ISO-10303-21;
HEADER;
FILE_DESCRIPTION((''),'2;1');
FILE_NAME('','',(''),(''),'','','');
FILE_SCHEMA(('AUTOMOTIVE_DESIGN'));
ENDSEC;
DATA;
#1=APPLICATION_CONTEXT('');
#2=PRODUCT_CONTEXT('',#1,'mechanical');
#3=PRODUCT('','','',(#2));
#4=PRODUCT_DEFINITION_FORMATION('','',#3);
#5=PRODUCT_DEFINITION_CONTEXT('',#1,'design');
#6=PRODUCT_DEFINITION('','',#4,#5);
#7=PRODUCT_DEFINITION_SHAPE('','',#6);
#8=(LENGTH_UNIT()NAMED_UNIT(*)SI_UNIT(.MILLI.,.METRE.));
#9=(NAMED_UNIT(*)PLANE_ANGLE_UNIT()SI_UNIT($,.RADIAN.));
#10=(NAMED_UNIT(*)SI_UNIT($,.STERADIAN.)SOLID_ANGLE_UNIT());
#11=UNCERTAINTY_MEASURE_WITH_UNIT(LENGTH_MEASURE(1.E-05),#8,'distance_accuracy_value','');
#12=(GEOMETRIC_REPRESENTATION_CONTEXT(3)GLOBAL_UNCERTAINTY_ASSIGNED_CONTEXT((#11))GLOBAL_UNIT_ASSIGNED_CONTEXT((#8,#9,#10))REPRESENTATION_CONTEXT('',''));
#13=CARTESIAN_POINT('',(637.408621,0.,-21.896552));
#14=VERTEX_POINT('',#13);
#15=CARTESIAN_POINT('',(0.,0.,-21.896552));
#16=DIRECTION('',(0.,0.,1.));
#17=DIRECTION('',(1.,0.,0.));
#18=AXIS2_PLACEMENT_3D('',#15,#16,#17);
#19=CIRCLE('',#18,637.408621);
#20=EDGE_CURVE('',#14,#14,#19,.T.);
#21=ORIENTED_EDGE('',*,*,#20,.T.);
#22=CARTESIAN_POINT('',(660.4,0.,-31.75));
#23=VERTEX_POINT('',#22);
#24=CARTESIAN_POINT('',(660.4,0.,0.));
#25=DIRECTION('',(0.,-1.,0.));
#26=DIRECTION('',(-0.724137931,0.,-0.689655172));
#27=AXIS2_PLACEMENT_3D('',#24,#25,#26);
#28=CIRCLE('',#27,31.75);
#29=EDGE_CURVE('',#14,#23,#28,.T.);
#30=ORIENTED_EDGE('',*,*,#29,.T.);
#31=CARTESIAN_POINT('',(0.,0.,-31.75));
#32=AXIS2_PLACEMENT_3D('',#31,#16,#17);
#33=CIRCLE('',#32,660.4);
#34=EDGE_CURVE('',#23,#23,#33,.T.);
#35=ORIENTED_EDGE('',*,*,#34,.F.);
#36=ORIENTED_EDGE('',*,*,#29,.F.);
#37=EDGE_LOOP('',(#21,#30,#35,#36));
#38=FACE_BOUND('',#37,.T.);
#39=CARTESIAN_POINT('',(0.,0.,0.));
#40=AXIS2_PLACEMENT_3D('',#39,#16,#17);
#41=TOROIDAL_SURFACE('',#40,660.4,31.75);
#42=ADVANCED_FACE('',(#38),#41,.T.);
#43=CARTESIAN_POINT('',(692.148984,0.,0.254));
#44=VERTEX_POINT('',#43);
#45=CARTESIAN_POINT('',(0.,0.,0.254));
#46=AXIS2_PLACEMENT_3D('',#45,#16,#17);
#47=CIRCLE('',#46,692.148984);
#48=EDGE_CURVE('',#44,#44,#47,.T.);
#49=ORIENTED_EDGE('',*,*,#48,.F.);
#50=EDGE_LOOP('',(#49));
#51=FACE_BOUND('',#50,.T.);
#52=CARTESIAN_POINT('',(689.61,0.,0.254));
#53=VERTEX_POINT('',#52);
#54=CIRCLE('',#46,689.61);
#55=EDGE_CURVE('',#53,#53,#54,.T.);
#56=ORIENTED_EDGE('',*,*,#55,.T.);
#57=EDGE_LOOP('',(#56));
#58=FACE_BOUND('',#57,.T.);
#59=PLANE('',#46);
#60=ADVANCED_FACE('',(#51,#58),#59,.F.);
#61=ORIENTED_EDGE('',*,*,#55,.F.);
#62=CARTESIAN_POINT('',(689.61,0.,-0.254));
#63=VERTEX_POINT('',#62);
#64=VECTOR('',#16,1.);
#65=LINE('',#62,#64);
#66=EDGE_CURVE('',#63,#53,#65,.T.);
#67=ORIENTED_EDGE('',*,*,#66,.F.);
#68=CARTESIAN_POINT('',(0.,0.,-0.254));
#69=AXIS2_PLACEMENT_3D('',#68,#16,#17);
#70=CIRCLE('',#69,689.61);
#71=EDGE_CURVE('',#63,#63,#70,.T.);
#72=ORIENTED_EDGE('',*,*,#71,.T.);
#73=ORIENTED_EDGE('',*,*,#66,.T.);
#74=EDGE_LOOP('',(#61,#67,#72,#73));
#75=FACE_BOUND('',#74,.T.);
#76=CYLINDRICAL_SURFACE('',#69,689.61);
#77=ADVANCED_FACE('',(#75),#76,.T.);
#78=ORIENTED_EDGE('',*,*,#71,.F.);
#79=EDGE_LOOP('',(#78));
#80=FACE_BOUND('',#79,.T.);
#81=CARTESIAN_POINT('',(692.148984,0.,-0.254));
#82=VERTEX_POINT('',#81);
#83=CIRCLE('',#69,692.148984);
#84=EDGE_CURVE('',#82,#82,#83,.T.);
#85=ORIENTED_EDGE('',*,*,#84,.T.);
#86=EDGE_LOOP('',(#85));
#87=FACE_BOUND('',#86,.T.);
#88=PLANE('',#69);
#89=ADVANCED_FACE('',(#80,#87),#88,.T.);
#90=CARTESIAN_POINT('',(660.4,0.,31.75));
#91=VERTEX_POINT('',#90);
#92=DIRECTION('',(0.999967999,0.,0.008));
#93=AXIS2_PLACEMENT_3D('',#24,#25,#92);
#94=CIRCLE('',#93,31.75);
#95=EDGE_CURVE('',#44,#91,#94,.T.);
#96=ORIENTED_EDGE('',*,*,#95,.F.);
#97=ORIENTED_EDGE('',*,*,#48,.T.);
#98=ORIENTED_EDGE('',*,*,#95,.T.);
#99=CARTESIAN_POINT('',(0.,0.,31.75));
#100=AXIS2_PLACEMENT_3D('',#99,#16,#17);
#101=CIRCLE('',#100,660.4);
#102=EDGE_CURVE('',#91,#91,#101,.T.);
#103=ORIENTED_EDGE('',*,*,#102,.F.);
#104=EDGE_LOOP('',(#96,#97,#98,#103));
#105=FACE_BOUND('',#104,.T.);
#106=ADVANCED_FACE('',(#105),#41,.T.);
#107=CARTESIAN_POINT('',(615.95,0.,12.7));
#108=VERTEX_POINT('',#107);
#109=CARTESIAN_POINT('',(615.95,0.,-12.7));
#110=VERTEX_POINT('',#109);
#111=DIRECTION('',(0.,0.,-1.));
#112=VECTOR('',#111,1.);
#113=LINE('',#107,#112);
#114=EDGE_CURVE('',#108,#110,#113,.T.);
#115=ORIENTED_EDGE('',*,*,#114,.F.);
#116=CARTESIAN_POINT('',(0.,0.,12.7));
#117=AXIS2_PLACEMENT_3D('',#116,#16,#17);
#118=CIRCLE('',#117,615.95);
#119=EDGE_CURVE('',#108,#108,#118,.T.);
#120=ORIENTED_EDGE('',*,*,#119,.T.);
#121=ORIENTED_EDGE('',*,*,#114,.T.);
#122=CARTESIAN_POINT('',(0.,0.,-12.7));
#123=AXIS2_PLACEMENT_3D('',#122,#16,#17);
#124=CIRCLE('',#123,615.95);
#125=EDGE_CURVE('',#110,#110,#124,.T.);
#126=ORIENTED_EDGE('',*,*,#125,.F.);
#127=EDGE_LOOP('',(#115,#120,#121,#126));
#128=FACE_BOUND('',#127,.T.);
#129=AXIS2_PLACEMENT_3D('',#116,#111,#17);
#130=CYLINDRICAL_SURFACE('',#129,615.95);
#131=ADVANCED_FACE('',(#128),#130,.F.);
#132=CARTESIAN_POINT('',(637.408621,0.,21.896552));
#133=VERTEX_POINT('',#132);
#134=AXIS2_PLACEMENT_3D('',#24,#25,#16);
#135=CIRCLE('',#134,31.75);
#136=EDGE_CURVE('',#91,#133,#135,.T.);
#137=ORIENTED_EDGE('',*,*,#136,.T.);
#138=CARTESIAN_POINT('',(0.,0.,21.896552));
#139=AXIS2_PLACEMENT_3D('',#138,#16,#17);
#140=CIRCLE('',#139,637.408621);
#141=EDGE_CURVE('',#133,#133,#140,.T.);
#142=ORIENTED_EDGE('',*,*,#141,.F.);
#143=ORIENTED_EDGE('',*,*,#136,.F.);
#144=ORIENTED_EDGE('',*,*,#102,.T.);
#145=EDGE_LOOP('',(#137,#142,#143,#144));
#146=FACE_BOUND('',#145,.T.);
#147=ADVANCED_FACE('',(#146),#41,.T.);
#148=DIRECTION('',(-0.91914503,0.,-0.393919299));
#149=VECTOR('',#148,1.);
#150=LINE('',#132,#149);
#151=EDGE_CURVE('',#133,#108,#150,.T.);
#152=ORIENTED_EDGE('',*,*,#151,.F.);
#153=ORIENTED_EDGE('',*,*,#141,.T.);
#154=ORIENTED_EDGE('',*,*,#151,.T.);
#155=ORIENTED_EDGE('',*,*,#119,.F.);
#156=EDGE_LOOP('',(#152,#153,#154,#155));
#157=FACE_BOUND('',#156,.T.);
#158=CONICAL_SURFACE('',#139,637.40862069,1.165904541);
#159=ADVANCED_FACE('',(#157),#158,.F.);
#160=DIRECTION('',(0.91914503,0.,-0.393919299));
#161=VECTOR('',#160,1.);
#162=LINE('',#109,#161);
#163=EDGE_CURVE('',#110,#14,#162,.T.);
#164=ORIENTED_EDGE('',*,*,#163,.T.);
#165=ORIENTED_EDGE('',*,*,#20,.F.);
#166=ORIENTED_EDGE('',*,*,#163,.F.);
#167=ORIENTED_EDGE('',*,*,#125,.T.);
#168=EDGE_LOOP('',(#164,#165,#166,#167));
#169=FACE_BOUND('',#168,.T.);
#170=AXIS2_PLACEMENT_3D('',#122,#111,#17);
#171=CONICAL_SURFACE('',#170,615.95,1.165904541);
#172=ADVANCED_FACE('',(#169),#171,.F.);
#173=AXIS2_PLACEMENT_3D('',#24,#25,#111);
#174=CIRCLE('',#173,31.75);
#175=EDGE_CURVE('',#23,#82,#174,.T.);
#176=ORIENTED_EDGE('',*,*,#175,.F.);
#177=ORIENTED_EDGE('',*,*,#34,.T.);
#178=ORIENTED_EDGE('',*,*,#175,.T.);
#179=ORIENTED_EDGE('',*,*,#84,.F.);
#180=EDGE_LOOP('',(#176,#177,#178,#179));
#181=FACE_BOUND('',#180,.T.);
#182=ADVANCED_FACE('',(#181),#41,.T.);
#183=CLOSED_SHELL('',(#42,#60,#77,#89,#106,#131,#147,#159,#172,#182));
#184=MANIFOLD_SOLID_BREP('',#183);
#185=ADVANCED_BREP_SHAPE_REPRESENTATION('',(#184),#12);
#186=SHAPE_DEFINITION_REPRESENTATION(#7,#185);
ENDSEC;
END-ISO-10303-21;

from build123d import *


# Not quite as in the source:
# - a feature names something its author has since deleted; it is built from what else it names


with BuildPart() as f1:
    # F0 (on Front) → F1 (revolve)
    with BuildSketch(Plane.XZ):
        with BuildLine():
            Line((628.65, 0), (615.95, 0))
            Line((615.95, 0), (615.95, -12.7))
            Line((615.95, -12.7), (637.4086206897, -21.8965517241))
            ThreePointArc((637.4086206897, -21.8965517241), (630.9208650644, -11.7916539742), (628.65, 0))
        make_face()
        with BuildLine():
            Line((615.95, 12.7), (615.95, 0))
            Line((615.95, 0), (628.65, 0))
            ThreePointArc((628.65, 0), (630.9208650644, 11.7916539742), (637.4086206897, 21.8965517241))
            Line((637.4086206897, 21.8965517241), (615.95, 12.7))
        make_face()
        with BuildLine():
            ThreePointArc((637.4086206897, 21.8965517241), (630.9208650644, 11.7916539742), (628.65, 0))
            ThreePointArc((628.65, 0), (630.9208650644, -11.7916539742), (637.4086206897, -21.8965517241))
            Line((637.4086206897, -21.8965517241), (660.4, -31.75))
            ThreePointArc((660.4, -31.75), (682.7606574143, -22.5402639736), (692.1489839837, -0.254))
            Line((692.1489839837, -0.254), (689.61, -0.254))
            Line((689.61, -0.254), (689.61, 0))
            Line((689.61, 0), (689.61, 0.254))
            Line((689.61, 0.254), (692.1489839837, 0.254))
            ThreePointArc((692.1489839837, 0.254), (682.7606574143, 22.5402639736), (660.4, 31.75))
            Line((660.4, 31.75), (637.4086206897, 21.8965517241))
        make_face()
        with BuildLine():
            ThreePointArc((660.4, 31.75), (647.8930622701, 29.1828547031), (637.4086206897, 21.8965517241))
            Line((637.4086206897, 21.8965517241), (660.4, 31.75))
        make_face()
        with BuildLine():
            Line((660.4, -31.75), (637.4086206897, -21.8965517241))
            ThreePointArc((637.4086206897, -21.8965517241), (647.8930622701, -29.1828547031), (660.4, -31.75))
        make_face()
    revolve(axis=Axis((0, 0, 41.6052), (0, 0, 1)))


solid = f1.part
